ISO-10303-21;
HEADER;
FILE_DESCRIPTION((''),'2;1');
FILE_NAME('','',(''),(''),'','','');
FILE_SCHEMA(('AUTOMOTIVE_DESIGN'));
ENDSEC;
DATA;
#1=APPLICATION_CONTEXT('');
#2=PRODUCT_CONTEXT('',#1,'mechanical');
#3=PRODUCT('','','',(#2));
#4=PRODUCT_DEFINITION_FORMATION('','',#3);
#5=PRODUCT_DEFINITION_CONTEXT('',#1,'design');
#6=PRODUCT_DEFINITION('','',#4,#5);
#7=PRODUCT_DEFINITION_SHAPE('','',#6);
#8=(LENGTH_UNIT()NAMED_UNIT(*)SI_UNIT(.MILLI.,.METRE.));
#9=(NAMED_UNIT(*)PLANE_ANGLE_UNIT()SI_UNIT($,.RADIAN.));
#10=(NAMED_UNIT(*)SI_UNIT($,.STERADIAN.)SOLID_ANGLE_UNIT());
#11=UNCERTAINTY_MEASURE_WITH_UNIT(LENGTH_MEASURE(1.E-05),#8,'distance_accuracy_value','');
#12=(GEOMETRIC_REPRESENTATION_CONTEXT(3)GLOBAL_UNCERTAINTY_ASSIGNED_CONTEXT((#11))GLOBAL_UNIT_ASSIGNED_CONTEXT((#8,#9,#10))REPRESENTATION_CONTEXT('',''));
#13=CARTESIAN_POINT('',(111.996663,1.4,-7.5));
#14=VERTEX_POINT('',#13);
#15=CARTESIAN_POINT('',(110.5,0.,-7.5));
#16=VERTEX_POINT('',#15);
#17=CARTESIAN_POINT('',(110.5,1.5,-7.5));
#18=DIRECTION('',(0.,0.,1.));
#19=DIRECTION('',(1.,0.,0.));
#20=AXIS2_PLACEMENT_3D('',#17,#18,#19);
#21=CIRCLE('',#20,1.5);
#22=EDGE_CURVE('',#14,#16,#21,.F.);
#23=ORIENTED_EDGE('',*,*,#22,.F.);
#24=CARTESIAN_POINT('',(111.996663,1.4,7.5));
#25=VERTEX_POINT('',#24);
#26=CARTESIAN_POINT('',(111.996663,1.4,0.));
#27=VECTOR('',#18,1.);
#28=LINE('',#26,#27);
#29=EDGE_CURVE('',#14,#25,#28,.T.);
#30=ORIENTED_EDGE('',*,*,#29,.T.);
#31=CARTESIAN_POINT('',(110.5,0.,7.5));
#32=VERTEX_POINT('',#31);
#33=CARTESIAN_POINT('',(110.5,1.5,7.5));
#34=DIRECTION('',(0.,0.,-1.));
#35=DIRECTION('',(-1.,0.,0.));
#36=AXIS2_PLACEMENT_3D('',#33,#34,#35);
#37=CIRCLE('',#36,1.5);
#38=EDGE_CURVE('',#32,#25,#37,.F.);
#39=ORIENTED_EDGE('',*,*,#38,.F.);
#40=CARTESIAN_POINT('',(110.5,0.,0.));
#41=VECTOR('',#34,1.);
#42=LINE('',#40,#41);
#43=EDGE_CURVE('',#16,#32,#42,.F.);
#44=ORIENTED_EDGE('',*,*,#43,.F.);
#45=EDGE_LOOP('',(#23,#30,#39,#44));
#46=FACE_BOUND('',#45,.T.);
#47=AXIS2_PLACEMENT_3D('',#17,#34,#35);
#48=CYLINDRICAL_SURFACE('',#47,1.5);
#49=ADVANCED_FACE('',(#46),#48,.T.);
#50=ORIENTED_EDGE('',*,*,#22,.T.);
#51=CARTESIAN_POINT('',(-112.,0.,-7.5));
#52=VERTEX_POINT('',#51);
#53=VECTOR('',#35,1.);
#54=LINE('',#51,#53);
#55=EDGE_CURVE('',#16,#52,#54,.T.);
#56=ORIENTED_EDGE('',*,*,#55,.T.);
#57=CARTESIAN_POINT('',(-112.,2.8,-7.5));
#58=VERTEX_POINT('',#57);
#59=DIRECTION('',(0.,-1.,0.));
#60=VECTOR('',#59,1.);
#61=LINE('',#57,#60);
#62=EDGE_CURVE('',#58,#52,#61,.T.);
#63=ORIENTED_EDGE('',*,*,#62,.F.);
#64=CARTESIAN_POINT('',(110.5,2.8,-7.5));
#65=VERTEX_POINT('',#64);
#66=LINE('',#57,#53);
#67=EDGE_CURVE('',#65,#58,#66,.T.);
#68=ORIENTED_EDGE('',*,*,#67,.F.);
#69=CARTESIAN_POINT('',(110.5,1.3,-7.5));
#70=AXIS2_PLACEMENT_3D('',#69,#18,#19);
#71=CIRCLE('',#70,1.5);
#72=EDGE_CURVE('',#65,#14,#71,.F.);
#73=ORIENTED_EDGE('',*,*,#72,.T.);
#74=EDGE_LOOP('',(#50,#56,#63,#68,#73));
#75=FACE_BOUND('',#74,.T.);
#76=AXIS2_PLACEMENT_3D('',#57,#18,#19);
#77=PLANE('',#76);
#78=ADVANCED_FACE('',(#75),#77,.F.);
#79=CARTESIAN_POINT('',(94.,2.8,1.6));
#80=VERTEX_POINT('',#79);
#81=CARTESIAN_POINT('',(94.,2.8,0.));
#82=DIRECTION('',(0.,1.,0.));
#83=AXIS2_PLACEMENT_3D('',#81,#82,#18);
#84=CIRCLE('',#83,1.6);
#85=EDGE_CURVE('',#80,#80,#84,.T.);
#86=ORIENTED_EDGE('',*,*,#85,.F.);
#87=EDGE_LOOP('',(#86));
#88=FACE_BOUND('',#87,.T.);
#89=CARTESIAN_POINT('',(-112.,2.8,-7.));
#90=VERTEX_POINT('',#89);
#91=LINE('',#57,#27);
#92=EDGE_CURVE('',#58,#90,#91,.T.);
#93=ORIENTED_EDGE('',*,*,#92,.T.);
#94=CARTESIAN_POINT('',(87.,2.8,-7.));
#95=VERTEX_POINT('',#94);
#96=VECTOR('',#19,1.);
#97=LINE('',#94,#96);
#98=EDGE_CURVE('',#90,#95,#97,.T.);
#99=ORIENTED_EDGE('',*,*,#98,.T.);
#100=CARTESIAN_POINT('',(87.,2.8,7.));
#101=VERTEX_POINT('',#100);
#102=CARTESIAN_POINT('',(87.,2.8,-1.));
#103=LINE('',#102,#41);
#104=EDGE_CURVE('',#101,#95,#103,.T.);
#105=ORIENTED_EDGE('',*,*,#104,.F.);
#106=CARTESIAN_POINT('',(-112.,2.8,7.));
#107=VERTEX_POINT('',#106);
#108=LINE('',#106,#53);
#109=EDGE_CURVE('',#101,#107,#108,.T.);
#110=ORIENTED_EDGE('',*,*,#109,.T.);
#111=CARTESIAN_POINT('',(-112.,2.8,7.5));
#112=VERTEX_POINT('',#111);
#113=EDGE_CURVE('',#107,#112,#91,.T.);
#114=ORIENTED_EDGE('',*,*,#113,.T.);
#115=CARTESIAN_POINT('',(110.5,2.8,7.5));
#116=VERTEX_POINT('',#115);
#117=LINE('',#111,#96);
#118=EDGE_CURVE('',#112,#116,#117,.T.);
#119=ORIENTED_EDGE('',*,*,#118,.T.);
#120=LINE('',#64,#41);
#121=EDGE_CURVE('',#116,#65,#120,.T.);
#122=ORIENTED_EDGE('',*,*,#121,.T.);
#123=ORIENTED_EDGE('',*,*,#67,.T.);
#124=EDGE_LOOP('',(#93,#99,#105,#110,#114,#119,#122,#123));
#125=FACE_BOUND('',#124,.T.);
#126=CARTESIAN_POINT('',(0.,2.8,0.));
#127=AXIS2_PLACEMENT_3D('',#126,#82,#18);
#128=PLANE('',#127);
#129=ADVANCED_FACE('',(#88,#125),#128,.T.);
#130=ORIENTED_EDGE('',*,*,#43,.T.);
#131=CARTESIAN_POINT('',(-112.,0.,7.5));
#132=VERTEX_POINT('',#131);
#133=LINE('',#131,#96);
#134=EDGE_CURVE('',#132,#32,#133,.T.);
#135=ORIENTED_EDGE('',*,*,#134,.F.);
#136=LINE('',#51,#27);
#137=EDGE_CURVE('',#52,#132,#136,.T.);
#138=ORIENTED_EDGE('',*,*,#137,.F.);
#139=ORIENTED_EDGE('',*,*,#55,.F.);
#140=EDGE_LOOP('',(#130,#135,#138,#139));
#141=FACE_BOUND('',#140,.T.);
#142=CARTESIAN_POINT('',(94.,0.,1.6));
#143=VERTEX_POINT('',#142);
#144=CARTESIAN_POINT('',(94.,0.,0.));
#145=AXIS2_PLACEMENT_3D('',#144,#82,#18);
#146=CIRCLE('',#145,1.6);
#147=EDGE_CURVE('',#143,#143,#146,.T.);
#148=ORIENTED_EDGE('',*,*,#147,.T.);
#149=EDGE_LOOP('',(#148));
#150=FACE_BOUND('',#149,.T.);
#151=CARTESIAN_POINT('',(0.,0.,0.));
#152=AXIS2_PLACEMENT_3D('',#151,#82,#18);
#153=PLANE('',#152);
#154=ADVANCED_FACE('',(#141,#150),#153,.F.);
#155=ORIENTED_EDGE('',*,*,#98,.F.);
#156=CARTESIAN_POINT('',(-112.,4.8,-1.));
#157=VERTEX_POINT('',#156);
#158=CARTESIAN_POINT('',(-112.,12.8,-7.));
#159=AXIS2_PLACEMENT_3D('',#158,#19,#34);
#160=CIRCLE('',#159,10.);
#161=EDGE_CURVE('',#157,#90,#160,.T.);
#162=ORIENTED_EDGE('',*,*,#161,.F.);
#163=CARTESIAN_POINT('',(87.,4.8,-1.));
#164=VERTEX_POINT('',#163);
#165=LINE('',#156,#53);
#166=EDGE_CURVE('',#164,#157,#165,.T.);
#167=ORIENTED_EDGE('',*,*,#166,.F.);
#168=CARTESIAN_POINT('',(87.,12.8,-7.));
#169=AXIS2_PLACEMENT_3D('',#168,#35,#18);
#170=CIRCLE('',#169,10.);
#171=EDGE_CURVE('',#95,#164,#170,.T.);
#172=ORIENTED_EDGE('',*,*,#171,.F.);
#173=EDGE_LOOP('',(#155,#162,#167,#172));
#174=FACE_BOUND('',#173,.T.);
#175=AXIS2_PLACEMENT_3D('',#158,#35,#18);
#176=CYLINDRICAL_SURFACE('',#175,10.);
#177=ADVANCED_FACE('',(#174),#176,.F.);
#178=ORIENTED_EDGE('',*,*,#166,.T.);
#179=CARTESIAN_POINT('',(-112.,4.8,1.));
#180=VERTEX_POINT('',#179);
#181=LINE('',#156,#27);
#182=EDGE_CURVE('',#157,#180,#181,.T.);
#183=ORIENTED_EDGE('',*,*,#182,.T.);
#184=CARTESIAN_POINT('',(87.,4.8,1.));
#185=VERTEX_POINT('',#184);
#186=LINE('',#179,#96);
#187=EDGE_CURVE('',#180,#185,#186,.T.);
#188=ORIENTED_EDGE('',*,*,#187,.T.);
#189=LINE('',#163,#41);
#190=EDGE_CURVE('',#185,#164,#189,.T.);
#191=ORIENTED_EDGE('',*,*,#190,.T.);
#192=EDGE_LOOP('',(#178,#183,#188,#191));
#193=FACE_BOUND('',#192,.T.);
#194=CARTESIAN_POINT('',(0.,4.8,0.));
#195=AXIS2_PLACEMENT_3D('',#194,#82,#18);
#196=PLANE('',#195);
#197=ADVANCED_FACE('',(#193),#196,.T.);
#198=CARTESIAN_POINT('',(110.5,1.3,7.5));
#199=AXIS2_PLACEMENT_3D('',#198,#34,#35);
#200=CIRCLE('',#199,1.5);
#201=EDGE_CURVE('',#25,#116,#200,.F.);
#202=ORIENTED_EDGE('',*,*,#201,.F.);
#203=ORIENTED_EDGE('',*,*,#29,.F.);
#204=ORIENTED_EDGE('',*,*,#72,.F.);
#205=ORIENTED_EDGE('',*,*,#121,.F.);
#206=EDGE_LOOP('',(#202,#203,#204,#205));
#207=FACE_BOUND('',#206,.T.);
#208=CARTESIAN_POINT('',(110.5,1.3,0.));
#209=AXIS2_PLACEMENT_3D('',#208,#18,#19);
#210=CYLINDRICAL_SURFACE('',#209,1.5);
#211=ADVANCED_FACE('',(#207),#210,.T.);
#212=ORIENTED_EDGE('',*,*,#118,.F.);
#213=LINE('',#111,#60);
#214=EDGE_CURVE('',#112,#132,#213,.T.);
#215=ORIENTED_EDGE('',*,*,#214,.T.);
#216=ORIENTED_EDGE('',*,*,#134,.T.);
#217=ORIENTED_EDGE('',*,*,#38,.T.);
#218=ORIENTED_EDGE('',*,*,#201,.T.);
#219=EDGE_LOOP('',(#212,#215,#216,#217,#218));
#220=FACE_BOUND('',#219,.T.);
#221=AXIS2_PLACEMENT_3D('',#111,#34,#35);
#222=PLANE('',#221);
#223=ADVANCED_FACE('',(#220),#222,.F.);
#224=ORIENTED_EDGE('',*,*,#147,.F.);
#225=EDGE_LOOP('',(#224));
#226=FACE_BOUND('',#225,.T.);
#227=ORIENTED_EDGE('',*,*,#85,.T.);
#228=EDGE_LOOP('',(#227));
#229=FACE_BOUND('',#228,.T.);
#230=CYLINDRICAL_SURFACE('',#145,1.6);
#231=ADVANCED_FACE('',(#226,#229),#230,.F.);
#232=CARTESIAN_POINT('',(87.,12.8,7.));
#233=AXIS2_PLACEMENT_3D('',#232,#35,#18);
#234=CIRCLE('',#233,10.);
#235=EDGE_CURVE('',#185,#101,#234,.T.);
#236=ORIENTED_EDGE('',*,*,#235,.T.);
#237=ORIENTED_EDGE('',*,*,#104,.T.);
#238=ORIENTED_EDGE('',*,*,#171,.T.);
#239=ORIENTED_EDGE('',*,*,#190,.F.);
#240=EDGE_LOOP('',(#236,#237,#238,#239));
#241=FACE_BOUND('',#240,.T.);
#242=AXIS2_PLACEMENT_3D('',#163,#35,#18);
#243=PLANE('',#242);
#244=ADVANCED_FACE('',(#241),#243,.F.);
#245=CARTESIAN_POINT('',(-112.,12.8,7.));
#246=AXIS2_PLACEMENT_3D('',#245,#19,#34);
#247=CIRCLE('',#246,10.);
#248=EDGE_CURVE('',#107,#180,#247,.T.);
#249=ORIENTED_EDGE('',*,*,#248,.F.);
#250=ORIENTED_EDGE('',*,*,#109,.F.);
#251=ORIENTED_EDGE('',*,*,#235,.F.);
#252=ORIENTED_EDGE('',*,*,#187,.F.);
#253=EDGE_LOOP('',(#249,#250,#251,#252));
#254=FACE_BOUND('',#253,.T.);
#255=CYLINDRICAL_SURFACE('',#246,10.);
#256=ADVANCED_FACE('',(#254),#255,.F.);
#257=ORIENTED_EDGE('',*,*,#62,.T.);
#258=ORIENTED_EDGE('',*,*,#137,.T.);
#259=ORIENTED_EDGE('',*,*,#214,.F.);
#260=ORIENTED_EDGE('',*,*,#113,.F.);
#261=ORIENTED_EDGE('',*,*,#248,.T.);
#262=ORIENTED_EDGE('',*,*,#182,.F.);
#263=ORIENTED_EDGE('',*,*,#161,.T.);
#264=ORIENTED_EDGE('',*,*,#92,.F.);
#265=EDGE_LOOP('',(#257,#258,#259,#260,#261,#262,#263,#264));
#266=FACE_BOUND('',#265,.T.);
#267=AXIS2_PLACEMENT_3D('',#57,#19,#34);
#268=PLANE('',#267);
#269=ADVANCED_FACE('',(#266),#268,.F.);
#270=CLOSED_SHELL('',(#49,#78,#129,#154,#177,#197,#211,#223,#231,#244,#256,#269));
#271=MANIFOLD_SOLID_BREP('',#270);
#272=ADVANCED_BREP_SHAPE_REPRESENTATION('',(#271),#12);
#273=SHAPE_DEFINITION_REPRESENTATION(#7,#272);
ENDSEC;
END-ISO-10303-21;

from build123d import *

# Parameters (mm, degrees)
SKETCH1_W           = 224
SKETCH1_H           = 15
BOSS_EXTRUDE1_DEPTH = 2.8
SKETCH2_W           = 199
SKETCH2_H           = 2
BOSS_EXTRUDE2_DEPTH = 2
SKETCH3_R           = 1.6
CUT_EXTRUDE1_DEPTH  = 113.285751545
FILLET1_R           = 10
FILLET2_R           = 1.5


with BuildPart() as part:
    # Sketch1 → Boss-Extrude1 (new body)
    with BuildSketch(Plane(origin=(0, 0, 0), x_dir=(1, 0, 0), z_dir=(0, 1, 0))):
        Rectangle(SKETCH1_W, SKETCH1_H)
    extrude(amount=BOSS_EXTRUDE1_DEPTH)

    # Sketch2 → Boss-Extrude2 (add)
    with BuildSketch(Plane(origin=(0, 2.8, 0), x_dir=(1, 0, 0), z_dir=(0, 1, 0))):
        with Locations((-12.5, 0)):
            Rectangle(SKETCH2_W, SKETCH2_H)
    extrude(amount=BOSS_EXTRUDE2_DEPTH)

    # Sketch3 → Cut-Extrude1 (cut, through all)
    with BuildSketch(Plane(origin=(0, 2.8, 0), x_dir=(1, 0, 0), z_dir=(0, 1, 0))):
        with Locations(Location((94, 0, 0), (0, 0, 270))):
            Circle(SKETCH3_R)
    extrude(amount=-CUT_EXTRUDE1_DEPTH, mode=Mode.SUBTRACT)

    # Fillet1
    # the kernel refuses this fillet: 10 mm, written as the material it adds along each edge
    with BuildSketch(Plane(origin=(-112, 2.8, -1), x_dir=(0, 0, -1), z_dir=(1, 0, 0)), Plane(origin=(87, 2.8, 1), x_dir=(0, 0, 1), z_dir=(-1, 0, 0))) as fillet1_piece_1:
        with BuildLine():
            CenterArc((6, 10), FILLET1_R, 233.130102354, 36.869897646)
            Line((0, 2), (0, 0))
            Line((0, 0), (6, 0))
        make_face()
    extrude(amount=199)

    # Fillet2
    # the kernel refuses this fillet: 1.5 mm, written as the material it takes off along each edge
    with BuildSketch(Plane(origin=(112, 0, -11.25), x_dir=(0, 1, 0), z_dir=(0, 0, 1))) as fillet2_piece_1:
        with BuildLine():
            CenterArc((FILLET2_R, FILLET2_R), FILLET2_R, 180, 90)
            Line((0, FILLET2_R), (0, 0))
            Line((0, 0), (FILLET2_R, 0))
        make_face()
    extrude(amount=22.5, mode=Mode.SUBTRACT)
    with BuildSketch(Plane(origin=(112, 2.8, -11.25), x_dir=(0, -1, 0), z_dir=(0, 0, 1))) as fillet2_piece_2:
        with BuildLine():
            CenterArc((FILLET2_R, -FILLET2_R), FILLET2_R, 90, 90)
            Line((0, -FILLET2_R), (0, 0))
            Line((0, 0), (FILLET2_R, 0))
        make_face()
    extrude(amount=22.5, mode=Mode.SUBTRACT)


solid = part.part
